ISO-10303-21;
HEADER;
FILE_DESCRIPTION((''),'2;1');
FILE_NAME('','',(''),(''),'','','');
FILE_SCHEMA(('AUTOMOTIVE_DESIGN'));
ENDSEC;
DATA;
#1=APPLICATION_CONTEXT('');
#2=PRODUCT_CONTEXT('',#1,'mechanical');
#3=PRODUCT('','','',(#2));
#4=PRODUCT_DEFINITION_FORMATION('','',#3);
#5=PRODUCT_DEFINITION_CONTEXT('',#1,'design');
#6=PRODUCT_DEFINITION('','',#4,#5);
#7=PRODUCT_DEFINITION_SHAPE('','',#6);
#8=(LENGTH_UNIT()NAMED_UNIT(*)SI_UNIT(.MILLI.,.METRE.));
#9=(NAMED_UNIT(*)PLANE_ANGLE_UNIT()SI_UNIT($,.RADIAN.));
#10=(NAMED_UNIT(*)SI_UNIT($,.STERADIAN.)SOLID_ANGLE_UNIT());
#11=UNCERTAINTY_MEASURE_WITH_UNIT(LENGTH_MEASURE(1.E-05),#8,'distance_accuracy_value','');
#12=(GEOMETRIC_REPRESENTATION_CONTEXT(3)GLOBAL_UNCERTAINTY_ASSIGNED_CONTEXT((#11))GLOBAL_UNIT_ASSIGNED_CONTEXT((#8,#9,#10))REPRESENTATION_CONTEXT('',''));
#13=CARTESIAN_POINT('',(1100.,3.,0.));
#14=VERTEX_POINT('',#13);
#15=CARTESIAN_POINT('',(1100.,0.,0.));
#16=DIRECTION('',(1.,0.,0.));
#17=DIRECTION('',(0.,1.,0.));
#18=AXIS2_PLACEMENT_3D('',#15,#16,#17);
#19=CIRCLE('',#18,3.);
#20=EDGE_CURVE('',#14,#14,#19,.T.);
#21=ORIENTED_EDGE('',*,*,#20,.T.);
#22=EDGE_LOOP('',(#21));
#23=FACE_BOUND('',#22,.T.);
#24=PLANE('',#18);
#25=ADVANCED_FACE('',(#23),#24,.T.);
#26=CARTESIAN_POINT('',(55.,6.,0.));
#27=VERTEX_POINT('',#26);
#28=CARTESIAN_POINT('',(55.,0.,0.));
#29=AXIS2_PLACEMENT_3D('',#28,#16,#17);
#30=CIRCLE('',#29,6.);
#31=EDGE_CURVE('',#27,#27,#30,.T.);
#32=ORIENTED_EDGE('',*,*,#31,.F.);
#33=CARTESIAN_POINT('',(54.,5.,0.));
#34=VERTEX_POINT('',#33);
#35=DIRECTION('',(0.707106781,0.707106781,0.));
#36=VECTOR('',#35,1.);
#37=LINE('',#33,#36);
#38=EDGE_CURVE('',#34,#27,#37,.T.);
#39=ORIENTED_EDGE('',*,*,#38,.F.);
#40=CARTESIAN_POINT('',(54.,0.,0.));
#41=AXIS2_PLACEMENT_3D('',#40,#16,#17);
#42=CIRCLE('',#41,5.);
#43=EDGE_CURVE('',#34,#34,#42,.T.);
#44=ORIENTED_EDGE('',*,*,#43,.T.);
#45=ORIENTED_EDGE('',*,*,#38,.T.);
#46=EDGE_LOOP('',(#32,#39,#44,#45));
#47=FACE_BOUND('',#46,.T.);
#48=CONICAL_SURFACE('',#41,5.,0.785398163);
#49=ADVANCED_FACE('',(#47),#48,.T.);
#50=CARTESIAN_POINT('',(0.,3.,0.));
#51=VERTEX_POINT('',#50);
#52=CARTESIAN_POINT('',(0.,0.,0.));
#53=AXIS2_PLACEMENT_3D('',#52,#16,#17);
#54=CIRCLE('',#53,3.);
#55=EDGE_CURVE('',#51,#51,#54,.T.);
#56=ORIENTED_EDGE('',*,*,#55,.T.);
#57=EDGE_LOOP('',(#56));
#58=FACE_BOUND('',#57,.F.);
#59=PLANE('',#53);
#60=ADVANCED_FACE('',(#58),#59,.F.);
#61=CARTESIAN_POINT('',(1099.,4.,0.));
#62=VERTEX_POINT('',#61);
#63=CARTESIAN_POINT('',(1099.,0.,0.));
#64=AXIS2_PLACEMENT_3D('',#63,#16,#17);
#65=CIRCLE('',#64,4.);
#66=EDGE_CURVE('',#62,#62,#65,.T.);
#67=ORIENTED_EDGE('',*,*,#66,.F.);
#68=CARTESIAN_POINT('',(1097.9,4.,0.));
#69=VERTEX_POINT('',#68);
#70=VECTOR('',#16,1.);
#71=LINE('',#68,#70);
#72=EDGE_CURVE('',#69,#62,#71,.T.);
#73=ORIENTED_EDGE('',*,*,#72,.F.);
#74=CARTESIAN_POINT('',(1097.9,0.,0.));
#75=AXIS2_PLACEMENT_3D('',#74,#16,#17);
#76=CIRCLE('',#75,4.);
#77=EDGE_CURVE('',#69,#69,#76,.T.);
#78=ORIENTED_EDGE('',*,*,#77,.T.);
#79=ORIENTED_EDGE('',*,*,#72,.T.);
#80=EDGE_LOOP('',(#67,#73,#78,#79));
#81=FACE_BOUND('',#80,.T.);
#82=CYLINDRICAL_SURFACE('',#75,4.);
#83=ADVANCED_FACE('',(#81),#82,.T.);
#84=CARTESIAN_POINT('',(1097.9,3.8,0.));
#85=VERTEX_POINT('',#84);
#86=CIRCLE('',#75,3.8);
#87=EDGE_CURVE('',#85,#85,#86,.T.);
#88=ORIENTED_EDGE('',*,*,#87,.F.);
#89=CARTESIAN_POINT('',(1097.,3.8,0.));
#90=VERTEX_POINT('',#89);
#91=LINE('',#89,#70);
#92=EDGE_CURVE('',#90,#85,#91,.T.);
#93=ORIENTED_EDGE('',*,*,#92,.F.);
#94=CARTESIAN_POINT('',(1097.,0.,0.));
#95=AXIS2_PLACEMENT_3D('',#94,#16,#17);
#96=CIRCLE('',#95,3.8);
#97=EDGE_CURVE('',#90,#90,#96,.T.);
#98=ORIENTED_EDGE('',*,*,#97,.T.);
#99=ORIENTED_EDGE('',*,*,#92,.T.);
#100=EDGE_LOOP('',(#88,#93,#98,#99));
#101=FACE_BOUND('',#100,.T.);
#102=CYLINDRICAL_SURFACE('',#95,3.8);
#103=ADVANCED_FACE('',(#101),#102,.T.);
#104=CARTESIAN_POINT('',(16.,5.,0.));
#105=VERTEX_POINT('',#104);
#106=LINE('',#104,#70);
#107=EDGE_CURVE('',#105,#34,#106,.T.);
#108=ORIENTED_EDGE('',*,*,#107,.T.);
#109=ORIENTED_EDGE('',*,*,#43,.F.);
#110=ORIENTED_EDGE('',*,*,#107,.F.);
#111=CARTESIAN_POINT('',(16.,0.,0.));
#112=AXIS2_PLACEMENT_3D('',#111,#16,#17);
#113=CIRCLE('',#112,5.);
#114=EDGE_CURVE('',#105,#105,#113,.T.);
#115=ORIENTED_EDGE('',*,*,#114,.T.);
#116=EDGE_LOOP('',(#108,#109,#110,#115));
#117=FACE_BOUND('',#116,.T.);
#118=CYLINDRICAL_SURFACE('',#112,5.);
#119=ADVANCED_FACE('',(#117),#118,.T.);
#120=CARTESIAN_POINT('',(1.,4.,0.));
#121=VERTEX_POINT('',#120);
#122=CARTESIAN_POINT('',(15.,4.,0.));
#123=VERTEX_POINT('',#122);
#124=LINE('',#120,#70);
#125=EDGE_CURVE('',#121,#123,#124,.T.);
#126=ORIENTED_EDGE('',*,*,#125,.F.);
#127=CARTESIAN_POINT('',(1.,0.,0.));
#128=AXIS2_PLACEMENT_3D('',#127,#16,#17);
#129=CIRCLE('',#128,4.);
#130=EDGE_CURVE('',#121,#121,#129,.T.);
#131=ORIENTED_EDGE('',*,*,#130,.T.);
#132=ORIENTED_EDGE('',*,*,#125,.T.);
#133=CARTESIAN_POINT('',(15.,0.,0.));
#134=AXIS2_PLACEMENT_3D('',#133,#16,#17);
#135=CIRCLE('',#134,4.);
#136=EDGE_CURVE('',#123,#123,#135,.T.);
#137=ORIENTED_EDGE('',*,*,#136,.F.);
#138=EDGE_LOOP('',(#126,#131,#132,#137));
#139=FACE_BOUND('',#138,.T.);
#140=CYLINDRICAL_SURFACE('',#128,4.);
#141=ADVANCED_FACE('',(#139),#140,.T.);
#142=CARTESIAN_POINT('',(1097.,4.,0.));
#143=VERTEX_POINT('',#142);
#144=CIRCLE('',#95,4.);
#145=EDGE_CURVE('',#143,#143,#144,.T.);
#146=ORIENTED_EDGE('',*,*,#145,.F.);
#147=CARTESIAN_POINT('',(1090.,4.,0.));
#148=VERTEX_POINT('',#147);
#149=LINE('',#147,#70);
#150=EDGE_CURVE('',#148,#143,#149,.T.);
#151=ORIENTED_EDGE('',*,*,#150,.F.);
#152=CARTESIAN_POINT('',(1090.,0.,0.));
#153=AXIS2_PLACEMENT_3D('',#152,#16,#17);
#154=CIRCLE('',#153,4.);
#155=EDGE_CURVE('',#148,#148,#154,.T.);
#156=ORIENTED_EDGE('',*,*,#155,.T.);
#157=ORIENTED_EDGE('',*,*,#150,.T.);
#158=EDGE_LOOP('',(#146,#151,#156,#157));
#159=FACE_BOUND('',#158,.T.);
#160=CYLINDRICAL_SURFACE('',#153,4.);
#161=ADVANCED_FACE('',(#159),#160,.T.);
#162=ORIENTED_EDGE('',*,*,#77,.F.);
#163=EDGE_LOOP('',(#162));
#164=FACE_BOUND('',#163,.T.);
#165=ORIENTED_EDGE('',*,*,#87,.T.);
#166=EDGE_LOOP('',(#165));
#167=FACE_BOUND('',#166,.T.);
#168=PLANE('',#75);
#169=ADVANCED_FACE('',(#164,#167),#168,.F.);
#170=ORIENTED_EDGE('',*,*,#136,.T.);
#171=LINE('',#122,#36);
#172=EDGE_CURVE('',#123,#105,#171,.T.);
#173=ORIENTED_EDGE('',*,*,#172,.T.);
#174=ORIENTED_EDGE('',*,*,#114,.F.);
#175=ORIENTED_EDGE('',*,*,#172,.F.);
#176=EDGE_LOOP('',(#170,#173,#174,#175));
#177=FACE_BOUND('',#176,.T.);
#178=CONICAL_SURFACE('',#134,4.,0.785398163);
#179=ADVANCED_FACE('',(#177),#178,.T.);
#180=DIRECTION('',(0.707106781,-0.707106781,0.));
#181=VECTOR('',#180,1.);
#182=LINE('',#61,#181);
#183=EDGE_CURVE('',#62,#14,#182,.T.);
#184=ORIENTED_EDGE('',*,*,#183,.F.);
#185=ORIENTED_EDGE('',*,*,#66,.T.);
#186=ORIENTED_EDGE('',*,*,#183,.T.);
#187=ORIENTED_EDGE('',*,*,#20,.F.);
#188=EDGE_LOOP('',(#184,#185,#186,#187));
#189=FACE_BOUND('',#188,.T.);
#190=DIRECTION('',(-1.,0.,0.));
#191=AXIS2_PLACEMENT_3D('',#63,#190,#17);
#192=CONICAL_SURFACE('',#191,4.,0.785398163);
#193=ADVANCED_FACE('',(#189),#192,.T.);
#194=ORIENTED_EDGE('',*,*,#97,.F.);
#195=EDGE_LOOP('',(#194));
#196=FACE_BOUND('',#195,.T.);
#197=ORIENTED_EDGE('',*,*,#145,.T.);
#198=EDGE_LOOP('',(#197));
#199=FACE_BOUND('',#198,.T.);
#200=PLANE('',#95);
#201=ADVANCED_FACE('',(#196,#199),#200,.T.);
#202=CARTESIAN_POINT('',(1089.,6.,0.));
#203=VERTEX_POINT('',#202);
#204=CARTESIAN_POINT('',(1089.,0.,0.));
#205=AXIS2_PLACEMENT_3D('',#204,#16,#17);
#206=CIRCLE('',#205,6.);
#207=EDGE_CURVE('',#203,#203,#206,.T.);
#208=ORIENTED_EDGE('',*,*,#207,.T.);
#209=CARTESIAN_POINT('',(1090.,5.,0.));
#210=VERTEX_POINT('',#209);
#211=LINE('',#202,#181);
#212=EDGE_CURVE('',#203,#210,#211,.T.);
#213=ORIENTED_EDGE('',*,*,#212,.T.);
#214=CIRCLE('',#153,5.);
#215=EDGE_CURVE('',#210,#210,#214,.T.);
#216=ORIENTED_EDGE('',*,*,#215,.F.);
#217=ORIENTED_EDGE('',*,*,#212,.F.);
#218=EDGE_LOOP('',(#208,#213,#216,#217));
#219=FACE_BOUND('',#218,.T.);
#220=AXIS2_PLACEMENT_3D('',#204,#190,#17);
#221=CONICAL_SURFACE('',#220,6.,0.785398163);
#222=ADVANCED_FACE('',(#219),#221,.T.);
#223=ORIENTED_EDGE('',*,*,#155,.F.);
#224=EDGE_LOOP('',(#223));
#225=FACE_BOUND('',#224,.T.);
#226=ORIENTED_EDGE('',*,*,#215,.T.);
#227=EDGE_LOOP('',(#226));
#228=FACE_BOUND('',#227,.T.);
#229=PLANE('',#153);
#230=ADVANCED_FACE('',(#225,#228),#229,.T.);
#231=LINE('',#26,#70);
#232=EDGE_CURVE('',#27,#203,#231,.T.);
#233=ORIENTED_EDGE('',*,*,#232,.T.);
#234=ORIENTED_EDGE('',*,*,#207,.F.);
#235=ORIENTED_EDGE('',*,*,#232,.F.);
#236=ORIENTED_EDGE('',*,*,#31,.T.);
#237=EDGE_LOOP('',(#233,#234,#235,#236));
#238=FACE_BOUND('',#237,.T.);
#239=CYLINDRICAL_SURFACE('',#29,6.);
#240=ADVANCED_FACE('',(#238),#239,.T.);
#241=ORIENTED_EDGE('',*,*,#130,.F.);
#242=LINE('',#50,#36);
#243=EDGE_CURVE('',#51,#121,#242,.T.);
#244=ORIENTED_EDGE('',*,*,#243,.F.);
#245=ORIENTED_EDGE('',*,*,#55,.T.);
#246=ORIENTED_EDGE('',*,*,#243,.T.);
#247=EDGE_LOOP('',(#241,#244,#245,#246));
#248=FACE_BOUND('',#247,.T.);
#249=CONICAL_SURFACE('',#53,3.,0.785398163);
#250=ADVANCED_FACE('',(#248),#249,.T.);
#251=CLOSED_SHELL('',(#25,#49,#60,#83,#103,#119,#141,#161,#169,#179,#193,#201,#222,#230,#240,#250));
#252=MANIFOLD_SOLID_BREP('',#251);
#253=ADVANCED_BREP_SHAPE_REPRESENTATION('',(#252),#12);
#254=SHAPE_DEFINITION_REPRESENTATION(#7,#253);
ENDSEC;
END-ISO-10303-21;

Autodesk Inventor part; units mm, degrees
ref_plane "YZ Plane" through (0, 0, 0) normal (1, 0, 0) x (0, 1, 0)
ref_plane "XZ Plane" through (0, 0, 0) normal (0, 1, 0) x (-1, 0, 0)
ref_plane "XY Plane" through (0, 0, 0) normal (0, 0, 1) x (1, 0, 0)
sketch "Sketch1" plane through (0, 0, 0) normal (0, 0, 1) x (1, 0, 0)
  line L0 (0, 4) -> (1, 4) construction
  line L1 (15, 4) -> (16, 5)
  line L2 (16, 5) -> (54, 5)
  line L3 (0, 4) -> (0, 3) construction
  line L4 (54, 5) -> (55, 6)
  line L5 (55, 6) -> (1089, 6)
  line L6 (0, 3) -> (1, 4)
  line L7 (0, 3) -> (0, 0)
  line L8 (1, 4) -> (15, 4)
  line L9 (1089, 6) -> (1090, 5)
  line L10 (1090, 5) -> (1090, 4)
  line L11 (1090, 4) -> (1097, 4)
  line L12 (1097, 4) -> (1097, 3.8)
  line L13 (1097, 3.8) -> (1097.9, 3.8)
  line L14 (1097.9, 3.8) -> (1097.9, 4)
  line L15 (1097.9, 4) -> (1099, 4)
  line L16 (1099, 4) -> (1100, 3)
  line L17 (1100, 3) -> (1100, 0)
  line L18 (0, 0) -> (1100, 0)
  point P0 (0, 0)
  point P1 (1100, 1.5)
  dimension "d0" = 4
  dimension "d1" = 5
  dimension "d2" = 6
  dimension "d3" = 135
  dimension "d4" = 135
  dimension "d5" = 15
  dimension "d6" = 39
  dimension "d7" = 135
  dimension "d8" = 4
  dimension "d9" = 7
  dimension "d10" = 10
  dimension "d11" = 0.2
  dimension "d12" = 0.9
  dimension "d14" = 135
  dimension "d15" = 1100
revolve "Revolution1" add sketch "Sketch1" angle 360 about axis through (0, 0, 0) along (1, 0, 0)
equation "\"d15\" = SHAFT_LEN"
equation "\"SHAFT_LEN\" = 1100"
properties part number "SFU1204-800"
